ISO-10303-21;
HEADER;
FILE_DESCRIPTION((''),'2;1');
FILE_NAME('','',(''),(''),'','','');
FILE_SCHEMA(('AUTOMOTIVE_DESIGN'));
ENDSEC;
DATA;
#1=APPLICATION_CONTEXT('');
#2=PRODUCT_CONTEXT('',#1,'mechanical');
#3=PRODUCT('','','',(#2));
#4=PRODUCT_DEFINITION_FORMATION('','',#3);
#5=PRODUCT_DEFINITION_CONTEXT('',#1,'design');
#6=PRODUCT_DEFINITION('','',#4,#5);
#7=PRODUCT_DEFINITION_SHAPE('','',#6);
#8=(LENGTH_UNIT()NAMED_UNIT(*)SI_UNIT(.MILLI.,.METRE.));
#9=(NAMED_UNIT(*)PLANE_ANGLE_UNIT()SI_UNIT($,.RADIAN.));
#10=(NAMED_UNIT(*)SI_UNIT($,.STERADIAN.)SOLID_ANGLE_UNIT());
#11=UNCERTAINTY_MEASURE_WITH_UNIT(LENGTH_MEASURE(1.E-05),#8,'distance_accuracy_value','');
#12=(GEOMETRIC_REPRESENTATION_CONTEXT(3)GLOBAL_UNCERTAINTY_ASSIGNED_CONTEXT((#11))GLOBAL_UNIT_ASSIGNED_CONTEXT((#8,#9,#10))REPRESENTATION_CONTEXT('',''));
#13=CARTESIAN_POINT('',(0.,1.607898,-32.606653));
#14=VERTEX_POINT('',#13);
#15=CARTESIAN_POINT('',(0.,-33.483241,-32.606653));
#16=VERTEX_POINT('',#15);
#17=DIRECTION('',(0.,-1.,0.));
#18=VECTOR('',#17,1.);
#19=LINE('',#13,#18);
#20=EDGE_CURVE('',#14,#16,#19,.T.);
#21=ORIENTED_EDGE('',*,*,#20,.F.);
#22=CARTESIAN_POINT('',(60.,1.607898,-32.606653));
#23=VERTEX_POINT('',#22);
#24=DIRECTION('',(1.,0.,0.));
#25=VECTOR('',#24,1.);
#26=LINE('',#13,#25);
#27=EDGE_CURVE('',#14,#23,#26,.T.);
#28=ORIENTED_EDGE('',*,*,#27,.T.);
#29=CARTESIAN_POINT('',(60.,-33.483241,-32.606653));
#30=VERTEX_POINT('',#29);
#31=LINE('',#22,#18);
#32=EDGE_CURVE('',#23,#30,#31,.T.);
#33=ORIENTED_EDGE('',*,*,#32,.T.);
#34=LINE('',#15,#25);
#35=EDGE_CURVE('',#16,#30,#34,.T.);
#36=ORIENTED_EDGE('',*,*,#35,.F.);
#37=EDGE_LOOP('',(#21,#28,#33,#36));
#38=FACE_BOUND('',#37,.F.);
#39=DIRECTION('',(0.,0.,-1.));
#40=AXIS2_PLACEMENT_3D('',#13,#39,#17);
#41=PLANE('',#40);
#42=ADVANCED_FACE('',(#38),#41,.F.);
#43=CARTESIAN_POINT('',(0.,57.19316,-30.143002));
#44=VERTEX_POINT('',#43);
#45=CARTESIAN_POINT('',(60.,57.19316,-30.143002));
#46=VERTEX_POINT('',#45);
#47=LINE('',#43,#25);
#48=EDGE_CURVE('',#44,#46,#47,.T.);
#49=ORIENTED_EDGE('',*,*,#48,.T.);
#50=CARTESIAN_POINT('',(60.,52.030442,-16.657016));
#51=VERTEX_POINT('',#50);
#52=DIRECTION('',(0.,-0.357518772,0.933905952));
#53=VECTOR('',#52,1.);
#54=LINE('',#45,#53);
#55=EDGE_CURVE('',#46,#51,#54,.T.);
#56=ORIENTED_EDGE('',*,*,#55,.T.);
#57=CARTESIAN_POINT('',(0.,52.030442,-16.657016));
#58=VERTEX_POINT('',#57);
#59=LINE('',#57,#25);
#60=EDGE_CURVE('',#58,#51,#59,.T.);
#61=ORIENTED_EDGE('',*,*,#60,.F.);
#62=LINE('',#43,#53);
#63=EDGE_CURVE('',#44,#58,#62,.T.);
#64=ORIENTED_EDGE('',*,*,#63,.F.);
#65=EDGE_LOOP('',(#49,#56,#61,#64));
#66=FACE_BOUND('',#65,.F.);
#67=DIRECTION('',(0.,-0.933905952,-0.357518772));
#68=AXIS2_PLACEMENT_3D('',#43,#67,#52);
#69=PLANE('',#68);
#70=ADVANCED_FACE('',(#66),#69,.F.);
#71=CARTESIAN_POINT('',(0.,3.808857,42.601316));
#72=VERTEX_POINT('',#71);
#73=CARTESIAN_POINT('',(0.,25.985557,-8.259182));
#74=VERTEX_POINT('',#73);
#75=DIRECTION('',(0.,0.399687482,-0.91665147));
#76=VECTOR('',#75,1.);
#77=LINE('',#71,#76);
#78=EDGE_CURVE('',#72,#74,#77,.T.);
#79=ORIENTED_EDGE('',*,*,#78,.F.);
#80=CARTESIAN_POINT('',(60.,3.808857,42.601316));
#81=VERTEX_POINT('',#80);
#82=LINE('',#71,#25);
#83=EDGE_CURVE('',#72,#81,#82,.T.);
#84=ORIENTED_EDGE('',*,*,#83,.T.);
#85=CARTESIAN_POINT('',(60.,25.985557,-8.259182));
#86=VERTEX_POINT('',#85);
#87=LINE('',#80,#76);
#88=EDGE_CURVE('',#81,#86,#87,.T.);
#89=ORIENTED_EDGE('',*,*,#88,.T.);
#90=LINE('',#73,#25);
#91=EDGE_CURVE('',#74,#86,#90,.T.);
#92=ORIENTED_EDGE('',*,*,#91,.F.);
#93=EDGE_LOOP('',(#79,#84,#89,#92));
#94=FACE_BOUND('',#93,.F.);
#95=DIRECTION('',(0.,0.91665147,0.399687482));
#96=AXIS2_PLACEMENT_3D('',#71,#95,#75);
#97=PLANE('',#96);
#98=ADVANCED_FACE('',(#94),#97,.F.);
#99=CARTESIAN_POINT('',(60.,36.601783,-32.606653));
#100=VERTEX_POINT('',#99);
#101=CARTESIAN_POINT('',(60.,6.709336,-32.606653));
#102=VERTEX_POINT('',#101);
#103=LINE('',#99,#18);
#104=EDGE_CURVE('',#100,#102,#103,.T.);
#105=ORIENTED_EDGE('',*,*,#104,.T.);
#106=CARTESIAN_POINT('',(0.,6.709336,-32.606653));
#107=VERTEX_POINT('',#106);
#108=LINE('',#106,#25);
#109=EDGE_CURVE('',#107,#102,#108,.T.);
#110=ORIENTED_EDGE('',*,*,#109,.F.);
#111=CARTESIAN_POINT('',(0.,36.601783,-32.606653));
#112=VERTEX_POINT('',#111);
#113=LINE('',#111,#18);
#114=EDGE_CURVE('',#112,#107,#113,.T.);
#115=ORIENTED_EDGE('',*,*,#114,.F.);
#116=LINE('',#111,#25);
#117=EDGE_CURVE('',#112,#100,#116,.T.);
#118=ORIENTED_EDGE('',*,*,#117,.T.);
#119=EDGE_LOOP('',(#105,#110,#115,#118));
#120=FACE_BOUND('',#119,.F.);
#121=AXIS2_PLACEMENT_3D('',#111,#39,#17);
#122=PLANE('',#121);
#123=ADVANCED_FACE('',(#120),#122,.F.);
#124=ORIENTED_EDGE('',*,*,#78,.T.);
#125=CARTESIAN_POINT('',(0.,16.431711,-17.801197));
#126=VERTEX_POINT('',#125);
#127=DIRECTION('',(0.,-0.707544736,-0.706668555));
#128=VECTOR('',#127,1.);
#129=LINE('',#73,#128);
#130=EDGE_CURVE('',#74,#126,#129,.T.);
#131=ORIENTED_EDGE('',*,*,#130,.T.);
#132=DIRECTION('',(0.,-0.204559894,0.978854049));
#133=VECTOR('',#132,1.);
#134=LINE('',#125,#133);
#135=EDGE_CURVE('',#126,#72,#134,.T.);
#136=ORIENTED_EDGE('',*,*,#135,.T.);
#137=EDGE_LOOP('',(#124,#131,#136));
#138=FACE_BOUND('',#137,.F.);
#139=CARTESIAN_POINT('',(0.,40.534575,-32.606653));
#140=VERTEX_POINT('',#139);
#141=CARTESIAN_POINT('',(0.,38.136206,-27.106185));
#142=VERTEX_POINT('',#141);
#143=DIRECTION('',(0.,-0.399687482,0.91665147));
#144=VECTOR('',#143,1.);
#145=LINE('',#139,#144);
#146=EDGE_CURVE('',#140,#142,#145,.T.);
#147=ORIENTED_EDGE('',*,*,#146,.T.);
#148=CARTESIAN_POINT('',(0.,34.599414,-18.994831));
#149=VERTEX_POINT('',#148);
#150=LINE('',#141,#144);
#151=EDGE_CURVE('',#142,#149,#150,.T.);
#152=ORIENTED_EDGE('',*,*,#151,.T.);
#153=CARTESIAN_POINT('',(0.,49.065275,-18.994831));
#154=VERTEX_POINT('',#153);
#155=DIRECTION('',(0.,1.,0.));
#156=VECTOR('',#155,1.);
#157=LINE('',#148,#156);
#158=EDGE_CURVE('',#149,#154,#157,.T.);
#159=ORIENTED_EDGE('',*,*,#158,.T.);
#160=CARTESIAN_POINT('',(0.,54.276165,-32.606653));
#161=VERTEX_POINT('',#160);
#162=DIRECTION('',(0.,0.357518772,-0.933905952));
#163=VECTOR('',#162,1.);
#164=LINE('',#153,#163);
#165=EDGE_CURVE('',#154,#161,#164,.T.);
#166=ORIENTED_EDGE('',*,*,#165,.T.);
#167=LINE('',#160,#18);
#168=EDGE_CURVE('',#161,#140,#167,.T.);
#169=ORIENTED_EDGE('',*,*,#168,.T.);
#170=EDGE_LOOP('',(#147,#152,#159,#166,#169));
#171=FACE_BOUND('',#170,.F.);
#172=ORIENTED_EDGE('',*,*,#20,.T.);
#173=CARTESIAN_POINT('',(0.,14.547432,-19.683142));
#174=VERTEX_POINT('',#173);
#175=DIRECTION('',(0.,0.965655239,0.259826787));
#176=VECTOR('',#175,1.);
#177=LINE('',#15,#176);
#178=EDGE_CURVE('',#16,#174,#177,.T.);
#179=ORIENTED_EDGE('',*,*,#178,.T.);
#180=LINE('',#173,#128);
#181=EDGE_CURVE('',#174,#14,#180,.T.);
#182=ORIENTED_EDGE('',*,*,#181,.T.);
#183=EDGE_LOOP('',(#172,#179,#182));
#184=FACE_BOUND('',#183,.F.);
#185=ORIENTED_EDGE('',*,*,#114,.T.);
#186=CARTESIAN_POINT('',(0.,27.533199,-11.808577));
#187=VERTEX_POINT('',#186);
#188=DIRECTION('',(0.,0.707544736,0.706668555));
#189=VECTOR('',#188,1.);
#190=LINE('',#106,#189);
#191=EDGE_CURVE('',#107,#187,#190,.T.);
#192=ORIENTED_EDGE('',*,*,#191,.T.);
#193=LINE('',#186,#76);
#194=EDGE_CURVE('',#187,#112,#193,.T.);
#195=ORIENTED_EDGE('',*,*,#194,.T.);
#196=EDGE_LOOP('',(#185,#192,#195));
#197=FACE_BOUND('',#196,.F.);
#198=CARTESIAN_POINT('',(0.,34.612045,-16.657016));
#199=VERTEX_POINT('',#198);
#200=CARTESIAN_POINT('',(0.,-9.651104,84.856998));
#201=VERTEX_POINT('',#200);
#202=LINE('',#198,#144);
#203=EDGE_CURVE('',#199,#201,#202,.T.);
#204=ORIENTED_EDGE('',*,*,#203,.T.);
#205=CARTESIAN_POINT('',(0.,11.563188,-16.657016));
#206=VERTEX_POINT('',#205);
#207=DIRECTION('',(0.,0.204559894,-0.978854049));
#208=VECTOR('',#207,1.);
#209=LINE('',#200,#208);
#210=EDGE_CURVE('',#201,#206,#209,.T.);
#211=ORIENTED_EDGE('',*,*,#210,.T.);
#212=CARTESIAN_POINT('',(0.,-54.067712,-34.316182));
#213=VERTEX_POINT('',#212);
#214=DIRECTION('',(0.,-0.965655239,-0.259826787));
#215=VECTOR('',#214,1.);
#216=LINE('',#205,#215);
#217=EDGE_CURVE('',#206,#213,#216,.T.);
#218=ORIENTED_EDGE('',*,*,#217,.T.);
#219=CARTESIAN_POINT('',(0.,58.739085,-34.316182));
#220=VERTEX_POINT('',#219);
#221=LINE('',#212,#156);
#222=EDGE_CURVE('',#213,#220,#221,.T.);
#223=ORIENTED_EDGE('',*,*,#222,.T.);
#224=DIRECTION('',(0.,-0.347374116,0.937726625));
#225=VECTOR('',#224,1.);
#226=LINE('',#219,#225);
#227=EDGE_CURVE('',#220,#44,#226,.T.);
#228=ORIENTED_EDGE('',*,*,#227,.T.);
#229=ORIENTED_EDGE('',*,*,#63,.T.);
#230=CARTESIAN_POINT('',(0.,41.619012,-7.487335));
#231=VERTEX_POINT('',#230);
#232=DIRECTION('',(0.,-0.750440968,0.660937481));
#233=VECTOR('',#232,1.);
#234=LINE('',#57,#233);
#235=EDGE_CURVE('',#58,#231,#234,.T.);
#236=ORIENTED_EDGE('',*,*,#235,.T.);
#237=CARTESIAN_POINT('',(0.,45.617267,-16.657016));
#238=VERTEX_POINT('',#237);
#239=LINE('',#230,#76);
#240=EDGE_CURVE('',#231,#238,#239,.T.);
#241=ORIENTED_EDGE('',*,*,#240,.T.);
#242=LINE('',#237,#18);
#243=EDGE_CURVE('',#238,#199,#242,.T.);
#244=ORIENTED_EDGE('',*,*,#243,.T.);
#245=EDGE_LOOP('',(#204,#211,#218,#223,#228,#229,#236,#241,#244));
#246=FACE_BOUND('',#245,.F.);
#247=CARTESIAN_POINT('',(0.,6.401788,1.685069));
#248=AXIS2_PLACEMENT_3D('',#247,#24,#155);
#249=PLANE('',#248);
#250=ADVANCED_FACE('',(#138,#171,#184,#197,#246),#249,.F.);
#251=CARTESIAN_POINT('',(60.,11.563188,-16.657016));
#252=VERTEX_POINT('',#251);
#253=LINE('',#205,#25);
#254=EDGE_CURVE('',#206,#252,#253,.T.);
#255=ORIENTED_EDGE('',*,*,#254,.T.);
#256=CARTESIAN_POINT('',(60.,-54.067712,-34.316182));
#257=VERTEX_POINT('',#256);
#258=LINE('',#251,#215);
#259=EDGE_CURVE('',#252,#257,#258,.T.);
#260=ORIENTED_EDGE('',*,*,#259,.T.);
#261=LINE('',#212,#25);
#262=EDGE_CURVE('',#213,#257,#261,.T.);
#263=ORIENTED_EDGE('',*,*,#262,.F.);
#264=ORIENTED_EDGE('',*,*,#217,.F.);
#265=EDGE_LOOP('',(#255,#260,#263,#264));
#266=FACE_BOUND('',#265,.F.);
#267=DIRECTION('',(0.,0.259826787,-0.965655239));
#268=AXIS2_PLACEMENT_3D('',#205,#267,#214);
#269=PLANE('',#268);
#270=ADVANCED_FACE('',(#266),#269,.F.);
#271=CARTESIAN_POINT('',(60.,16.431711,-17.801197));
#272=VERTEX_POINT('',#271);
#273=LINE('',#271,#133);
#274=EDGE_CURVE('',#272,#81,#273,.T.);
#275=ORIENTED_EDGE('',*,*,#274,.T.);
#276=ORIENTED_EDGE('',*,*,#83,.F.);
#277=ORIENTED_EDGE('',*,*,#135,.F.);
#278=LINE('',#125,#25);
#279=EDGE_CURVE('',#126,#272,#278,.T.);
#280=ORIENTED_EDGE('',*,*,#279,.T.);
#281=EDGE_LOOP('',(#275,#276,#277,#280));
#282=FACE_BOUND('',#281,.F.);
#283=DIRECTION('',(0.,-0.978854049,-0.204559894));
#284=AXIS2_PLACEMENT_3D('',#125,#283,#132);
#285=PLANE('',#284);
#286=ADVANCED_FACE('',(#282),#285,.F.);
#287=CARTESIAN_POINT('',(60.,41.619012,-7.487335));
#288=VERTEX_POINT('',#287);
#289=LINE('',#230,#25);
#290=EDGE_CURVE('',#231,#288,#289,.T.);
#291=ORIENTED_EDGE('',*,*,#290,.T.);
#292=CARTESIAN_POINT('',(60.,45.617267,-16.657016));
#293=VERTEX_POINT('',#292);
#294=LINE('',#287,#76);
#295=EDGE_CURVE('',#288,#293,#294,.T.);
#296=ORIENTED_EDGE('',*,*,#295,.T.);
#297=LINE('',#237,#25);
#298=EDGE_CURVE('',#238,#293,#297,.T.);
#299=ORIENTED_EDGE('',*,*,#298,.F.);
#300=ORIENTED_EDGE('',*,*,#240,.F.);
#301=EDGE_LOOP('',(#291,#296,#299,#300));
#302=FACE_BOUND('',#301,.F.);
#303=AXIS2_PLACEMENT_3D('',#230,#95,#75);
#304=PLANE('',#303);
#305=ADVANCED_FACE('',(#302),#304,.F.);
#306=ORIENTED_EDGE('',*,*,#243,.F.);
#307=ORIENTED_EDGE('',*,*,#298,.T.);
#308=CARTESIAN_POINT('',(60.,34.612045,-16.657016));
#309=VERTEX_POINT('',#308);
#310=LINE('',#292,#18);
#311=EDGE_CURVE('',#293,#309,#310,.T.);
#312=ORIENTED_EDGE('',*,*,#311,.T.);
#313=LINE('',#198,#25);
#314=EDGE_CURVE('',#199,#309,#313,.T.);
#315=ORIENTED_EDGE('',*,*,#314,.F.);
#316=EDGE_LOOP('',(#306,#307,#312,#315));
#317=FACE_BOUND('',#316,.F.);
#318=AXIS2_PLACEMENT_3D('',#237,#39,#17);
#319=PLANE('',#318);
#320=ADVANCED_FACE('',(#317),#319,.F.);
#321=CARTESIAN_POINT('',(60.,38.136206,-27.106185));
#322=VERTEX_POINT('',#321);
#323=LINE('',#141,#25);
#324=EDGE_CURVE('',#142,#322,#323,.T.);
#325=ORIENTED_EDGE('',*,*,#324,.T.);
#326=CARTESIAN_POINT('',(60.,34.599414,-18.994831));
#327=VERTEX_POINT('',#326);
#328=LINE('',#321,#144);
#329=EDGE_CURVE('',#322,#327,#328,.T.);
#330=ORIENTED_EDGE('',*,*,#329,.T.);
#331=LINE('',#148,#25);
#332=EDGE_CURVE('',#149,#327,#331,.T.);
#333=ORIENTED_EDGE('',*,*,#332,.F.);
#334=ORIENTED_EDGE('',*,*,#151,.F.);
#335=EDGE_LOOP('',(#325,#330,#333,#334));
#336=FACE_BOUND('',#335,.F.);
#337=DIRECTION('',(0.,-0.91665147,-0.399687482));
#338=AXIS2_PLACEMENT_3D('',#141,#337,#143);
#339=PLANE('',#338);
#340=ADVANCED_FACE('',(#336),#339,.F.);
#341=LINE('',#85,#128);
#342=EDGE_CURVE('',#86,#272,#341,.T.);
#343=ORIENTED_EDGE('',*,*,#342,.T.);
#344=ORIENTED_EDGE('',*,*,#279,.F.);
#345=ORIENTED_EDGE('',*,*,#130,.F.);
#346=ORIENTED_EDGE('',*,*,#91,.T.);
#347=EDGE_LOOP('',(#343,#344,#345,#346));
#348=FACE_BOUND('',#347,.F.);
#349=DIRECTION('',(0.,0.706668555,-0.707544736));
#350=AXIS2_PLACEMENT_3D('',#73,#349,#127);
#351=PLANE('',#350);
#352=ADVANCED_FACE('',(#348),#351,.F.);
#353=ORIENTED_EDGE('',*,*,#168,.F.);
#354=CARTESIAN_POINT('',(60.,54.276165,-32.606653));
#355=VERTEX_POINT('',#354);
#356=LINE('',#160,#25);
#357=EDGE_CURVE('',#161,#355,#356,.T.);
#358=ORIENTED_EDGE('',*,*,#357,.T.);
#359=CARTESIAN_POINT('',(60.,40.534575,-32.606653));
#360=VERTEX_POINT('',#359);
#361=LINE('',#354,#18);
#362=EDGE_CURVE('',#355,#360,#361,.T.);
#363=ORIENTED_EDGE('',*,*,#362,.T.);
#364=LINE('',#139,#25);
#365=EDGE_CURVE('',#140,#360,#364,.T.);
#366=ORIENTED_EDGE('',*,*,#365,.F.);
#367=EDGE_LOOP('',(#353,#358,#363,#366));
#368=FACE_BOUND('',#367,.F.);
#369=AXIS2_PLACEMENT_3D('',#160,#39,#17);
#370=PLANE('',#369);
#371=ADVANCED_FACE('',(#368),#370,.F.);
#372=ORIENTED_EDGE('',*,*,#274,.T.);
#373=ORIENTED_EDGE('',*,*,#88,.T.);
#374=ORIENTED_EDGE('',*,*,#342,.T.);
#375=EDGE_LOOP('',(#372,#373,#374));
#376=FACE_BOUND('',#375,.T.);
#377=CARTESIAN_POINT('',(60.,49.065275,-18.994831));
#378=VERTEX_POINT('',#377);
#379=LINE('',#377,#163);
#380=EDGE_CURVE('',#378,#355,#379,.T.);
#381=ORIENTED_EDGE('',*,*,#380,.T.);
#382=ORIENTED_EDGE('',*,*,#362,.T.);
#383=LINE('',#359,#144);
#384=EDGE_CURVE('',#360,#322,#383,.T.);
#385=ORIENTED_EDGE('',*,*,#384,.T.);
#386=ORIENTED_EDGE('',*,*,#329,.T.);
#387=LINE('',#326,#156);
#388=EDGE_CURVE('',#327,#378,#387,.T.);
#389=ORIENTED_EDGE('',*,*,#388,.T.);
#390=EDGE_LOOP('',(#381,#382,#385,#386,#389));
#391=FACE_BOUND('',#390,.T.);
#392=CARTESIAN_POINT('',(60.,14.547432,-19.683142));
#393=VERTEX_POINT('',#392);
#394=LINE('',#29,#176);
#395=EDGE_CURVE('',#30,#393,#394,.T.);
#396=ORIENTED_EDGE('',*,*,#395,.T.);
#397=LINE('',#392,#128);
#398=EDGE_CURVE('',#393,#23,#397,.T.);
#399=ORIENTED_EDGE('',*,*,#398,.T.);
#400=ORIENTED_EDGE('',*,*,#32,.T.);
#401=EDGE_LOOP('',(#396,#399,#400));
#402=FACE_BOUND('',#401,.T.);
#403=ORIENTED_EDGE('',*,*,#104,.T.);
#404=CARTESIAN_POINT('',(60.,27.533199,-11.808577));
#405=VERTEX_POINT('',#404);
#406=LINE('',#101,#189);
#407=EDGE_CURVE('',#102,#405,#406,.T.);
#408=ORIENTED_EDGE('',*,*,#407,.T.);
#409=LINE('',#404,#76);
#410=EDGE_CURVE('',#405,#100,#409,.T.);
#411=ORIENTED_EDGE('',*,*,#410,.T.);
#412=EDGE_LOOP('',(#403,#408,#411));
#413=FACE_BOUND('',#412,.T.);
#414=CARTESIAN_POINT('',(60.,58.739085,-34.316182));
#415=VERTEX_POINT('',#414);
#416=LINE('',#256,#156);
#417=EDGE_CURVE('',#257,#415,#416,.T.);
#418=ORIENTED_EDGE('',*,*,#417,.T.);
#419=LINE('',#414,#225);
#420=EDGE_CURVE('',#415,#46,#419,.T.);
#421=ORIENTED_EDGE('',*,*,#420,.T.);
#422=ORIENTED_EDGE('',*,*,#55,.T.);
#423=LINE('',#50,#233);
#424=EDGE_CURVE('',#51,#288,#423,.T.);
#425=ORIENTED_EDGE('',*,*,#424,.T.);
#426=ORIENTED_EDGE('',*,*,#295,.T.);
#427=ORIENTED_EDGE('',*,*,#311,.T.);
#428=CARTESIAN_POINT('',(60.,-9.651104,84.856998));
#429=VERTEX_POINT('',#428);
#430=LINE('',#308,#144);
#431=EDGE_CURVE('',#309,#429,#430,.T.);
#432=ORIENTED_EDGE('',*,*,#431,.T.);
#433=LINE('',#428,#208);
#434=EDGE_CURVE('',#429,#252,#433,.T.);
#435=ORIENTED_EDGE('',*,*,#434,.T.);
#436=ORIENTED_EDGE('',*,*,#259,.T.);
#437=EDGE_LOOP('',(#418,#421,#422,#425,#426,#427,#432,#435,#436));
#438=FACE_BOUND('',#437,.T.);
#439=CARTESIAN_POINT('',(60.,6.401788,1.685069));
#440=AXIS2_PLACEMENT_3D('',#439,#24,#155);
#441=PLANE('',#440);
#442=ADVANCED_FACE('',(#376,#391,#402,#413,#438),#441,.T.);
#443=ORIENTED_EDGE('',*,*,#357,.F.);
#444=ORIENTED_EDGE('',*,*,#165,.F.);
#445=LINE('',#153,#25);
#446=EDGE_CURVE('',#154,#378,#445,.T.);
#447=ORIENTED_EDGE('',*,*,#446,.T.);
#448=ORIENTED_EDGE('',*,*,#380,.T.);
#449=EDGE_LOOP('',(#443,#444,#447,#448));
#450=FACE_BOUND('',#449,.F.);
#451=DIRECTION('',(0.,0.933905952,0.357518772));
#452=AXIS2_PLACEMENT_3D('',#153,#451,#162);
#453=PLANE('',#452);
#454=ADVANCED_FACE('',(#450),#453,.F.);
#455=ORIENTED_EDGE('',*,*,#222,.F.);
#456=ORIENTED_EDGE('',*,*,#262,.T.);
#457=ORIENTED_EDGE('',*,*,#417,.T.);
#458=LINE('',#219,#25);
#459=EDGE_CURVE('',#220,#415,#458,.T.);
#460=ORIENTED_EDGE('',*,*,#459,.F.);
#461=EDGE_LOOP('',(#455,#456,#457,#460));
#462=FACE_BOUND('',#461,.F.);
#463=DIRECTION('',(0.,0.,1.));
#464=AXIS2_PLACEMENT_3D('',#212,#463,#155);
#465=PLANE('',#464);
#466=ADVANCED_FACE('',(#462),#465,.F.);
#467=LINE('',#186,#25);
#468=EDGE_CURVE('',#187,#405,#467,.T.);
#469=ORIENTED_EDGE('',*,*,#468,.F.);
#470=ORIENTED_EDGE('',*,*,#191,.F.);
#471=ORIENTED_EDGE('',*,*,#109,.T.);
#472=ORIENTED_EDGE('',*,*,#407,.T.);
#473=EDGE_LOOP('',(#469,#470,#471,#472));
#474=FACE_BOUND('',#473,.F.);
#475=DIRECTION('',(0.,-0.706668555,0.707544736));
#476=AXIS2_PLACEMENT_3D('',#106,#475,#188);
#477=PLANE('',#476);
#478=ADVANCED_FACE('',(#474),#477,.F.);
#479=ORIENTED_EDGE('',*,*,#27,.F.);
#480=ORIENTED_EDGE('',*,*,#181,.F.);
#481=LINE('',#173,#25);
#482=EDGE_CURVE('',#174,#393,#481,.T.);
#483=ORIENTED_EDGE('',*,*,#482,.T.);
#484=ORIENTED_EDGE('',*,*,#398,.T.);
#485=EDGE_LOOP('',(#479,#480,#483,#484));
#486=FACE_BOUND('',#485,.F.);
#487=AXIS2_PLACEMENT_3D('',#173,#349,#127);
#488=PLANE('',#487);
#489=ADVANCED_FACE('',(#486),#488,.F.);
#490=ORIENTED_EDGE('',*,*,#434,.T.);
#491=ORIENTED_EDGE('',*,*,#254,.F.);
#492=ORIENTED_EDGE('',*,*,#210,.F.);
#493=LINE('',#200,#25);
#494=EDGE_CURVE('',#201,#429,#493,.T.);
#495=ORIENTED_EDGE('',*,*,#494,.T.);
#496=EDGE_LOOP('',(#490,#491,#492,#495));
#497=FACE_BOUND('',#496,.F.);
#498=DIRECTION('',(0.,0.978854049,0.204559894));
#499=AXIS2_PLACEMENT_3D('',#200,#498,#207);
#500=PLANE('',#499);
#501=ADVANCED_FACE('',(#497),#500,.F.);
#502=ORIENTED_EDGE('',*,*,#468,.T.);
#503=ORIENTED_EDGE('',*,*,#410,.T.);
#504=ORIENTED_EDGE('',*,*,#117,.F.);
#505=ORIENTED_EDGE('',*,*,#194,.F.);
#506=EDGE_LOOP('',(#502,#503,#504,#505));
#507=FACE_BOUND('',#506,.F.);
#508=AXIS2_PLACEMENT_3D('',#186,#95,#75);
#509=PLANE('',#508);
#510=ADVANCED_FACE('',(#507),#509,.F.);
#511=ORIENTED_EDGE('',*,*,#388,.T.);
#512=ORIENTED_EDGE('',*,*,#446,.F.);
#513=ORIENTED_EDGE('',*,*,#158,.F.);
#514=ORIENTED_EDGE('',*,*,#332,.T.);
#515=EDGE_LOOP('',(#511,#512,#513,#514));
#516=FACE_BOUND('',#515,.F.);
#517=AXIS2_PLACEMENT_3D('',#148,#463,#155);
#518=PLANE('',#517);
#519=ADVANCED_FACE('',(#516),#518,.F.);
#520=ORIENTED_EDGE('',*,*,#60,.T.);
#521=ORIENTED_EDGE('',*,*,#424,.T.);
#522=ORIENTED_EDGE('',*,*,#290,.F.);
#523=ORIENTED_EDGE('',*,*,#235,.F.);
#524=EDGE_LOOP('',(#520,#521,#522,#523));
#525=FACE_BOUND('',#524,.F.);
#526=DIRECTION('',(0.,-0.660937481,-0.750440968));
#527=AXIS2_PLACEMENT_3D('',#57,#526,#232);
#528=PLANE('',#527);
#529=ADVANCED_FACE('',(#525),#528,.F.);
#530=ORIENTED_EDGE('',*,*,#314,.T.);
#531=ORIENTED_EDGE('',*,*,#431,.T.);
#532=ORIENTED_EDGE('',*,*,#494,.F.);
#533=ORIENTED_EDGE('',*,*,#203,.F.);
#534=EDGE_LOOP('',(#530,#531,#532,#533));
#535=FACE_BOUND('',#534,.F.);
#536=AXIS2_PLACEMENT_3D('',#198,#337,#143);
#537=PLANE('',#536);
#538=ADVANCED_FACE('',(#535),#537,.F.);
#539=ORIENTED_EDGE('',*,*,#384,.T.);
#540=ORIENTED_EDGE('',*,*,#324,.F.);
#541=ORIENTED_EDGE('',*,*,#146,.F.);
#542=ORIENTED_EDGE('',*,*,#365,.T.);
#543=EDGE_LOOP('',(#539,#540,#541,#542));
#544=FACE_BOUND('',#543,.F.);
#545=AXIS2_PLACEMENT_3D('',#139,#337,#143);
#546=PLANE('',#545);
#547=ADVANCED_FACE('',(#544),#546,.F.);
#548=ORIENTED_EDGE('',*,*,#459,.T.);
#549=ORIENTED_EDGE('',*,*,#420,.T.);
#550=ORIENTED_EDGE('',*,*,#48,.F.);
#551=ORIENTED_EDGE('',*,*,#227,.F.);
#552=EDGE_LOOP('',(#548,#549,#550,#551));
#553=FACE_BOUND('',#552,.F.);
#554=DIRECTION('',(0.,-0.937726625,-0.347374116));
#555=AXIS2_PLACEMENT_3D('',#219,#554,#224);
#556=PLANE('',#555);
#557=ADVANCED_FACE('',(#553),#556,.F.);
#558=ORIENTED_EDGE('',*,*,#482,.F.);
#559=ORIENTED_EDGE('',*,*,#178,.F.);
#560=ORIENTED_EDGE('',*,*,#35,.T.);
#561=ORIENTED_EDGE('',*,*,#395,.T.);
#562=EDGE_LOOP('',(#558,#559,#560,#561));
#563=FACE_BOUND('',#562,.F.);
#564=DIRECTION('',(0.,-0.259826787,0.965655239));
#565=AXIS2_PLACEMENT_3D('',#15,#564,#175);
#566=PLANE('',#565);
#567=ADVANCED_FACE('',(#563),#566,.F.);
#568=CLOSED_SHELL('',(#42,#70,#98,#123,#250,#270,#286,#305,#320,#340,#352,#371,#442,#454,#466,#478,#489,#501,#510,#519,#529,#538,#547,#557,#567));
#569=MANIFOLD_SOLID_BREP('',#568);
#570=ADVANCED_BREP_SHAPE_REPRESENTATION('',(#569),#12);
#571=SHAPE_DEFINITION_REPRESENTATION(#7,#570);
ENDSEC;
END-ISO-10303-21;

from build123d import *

# Parameters (mm, degrees)
F1_DEPTH = 60


# Not quite as in the source:
# - a feature names something its author has since deleted; it is built from what else it names


with BuildPart() as f1:
    # F0 (on Right) → F1 (new body)
    with BuildSketch(Plane.YZ):
        Polygon((-9.6511039816, 84.8569979519), (11.5631884334, -16.6570162717), (-54.0677122772, -34.3161821365), (58.7390847504, -34.3161821365), (57.1931600571, -30.1430020481), (52.030442059, -16.6570162717), (41.619012037, -7.4873352069), (45.6172674894, -16.6570162717), (45.6120451947, -16.6570162717), (34.6120451947, -16.6570162717), align=None)
        Polygon((-33.4832413232, -32.6066525748), (14.5474322128, -19.683142134), (1.6078982385, -32.6066525748), align=None, mode=Mode.SUBTRACT)
        Polygon((6.7093357808, -32.6066525748), (27.5331988357, -11.8085765279), (36.6017826139, -32.6066525748), align=None, mode=Mode.SUBTRACT)
        Polygon((34.5994135062, -18.9948312665), (45.6120451947, -18.9948312665), (49.0652749053, -18.9948312665), (54.2761653822, -32.6066525748), (40.534575087, -32.6066525748), (38.136206347, -27.1061845124), align=None, mode=Mode.SUBTRACT)
        Polygon((16.4317106992, -17.8011970237), (3.8088566841, 42.6013163841), (25.9855565835, -8.2591820422), align=None, mode=Mode.SUBTRACT)
    extrude(amount=F1_DEPTH)


solid = f1.part
